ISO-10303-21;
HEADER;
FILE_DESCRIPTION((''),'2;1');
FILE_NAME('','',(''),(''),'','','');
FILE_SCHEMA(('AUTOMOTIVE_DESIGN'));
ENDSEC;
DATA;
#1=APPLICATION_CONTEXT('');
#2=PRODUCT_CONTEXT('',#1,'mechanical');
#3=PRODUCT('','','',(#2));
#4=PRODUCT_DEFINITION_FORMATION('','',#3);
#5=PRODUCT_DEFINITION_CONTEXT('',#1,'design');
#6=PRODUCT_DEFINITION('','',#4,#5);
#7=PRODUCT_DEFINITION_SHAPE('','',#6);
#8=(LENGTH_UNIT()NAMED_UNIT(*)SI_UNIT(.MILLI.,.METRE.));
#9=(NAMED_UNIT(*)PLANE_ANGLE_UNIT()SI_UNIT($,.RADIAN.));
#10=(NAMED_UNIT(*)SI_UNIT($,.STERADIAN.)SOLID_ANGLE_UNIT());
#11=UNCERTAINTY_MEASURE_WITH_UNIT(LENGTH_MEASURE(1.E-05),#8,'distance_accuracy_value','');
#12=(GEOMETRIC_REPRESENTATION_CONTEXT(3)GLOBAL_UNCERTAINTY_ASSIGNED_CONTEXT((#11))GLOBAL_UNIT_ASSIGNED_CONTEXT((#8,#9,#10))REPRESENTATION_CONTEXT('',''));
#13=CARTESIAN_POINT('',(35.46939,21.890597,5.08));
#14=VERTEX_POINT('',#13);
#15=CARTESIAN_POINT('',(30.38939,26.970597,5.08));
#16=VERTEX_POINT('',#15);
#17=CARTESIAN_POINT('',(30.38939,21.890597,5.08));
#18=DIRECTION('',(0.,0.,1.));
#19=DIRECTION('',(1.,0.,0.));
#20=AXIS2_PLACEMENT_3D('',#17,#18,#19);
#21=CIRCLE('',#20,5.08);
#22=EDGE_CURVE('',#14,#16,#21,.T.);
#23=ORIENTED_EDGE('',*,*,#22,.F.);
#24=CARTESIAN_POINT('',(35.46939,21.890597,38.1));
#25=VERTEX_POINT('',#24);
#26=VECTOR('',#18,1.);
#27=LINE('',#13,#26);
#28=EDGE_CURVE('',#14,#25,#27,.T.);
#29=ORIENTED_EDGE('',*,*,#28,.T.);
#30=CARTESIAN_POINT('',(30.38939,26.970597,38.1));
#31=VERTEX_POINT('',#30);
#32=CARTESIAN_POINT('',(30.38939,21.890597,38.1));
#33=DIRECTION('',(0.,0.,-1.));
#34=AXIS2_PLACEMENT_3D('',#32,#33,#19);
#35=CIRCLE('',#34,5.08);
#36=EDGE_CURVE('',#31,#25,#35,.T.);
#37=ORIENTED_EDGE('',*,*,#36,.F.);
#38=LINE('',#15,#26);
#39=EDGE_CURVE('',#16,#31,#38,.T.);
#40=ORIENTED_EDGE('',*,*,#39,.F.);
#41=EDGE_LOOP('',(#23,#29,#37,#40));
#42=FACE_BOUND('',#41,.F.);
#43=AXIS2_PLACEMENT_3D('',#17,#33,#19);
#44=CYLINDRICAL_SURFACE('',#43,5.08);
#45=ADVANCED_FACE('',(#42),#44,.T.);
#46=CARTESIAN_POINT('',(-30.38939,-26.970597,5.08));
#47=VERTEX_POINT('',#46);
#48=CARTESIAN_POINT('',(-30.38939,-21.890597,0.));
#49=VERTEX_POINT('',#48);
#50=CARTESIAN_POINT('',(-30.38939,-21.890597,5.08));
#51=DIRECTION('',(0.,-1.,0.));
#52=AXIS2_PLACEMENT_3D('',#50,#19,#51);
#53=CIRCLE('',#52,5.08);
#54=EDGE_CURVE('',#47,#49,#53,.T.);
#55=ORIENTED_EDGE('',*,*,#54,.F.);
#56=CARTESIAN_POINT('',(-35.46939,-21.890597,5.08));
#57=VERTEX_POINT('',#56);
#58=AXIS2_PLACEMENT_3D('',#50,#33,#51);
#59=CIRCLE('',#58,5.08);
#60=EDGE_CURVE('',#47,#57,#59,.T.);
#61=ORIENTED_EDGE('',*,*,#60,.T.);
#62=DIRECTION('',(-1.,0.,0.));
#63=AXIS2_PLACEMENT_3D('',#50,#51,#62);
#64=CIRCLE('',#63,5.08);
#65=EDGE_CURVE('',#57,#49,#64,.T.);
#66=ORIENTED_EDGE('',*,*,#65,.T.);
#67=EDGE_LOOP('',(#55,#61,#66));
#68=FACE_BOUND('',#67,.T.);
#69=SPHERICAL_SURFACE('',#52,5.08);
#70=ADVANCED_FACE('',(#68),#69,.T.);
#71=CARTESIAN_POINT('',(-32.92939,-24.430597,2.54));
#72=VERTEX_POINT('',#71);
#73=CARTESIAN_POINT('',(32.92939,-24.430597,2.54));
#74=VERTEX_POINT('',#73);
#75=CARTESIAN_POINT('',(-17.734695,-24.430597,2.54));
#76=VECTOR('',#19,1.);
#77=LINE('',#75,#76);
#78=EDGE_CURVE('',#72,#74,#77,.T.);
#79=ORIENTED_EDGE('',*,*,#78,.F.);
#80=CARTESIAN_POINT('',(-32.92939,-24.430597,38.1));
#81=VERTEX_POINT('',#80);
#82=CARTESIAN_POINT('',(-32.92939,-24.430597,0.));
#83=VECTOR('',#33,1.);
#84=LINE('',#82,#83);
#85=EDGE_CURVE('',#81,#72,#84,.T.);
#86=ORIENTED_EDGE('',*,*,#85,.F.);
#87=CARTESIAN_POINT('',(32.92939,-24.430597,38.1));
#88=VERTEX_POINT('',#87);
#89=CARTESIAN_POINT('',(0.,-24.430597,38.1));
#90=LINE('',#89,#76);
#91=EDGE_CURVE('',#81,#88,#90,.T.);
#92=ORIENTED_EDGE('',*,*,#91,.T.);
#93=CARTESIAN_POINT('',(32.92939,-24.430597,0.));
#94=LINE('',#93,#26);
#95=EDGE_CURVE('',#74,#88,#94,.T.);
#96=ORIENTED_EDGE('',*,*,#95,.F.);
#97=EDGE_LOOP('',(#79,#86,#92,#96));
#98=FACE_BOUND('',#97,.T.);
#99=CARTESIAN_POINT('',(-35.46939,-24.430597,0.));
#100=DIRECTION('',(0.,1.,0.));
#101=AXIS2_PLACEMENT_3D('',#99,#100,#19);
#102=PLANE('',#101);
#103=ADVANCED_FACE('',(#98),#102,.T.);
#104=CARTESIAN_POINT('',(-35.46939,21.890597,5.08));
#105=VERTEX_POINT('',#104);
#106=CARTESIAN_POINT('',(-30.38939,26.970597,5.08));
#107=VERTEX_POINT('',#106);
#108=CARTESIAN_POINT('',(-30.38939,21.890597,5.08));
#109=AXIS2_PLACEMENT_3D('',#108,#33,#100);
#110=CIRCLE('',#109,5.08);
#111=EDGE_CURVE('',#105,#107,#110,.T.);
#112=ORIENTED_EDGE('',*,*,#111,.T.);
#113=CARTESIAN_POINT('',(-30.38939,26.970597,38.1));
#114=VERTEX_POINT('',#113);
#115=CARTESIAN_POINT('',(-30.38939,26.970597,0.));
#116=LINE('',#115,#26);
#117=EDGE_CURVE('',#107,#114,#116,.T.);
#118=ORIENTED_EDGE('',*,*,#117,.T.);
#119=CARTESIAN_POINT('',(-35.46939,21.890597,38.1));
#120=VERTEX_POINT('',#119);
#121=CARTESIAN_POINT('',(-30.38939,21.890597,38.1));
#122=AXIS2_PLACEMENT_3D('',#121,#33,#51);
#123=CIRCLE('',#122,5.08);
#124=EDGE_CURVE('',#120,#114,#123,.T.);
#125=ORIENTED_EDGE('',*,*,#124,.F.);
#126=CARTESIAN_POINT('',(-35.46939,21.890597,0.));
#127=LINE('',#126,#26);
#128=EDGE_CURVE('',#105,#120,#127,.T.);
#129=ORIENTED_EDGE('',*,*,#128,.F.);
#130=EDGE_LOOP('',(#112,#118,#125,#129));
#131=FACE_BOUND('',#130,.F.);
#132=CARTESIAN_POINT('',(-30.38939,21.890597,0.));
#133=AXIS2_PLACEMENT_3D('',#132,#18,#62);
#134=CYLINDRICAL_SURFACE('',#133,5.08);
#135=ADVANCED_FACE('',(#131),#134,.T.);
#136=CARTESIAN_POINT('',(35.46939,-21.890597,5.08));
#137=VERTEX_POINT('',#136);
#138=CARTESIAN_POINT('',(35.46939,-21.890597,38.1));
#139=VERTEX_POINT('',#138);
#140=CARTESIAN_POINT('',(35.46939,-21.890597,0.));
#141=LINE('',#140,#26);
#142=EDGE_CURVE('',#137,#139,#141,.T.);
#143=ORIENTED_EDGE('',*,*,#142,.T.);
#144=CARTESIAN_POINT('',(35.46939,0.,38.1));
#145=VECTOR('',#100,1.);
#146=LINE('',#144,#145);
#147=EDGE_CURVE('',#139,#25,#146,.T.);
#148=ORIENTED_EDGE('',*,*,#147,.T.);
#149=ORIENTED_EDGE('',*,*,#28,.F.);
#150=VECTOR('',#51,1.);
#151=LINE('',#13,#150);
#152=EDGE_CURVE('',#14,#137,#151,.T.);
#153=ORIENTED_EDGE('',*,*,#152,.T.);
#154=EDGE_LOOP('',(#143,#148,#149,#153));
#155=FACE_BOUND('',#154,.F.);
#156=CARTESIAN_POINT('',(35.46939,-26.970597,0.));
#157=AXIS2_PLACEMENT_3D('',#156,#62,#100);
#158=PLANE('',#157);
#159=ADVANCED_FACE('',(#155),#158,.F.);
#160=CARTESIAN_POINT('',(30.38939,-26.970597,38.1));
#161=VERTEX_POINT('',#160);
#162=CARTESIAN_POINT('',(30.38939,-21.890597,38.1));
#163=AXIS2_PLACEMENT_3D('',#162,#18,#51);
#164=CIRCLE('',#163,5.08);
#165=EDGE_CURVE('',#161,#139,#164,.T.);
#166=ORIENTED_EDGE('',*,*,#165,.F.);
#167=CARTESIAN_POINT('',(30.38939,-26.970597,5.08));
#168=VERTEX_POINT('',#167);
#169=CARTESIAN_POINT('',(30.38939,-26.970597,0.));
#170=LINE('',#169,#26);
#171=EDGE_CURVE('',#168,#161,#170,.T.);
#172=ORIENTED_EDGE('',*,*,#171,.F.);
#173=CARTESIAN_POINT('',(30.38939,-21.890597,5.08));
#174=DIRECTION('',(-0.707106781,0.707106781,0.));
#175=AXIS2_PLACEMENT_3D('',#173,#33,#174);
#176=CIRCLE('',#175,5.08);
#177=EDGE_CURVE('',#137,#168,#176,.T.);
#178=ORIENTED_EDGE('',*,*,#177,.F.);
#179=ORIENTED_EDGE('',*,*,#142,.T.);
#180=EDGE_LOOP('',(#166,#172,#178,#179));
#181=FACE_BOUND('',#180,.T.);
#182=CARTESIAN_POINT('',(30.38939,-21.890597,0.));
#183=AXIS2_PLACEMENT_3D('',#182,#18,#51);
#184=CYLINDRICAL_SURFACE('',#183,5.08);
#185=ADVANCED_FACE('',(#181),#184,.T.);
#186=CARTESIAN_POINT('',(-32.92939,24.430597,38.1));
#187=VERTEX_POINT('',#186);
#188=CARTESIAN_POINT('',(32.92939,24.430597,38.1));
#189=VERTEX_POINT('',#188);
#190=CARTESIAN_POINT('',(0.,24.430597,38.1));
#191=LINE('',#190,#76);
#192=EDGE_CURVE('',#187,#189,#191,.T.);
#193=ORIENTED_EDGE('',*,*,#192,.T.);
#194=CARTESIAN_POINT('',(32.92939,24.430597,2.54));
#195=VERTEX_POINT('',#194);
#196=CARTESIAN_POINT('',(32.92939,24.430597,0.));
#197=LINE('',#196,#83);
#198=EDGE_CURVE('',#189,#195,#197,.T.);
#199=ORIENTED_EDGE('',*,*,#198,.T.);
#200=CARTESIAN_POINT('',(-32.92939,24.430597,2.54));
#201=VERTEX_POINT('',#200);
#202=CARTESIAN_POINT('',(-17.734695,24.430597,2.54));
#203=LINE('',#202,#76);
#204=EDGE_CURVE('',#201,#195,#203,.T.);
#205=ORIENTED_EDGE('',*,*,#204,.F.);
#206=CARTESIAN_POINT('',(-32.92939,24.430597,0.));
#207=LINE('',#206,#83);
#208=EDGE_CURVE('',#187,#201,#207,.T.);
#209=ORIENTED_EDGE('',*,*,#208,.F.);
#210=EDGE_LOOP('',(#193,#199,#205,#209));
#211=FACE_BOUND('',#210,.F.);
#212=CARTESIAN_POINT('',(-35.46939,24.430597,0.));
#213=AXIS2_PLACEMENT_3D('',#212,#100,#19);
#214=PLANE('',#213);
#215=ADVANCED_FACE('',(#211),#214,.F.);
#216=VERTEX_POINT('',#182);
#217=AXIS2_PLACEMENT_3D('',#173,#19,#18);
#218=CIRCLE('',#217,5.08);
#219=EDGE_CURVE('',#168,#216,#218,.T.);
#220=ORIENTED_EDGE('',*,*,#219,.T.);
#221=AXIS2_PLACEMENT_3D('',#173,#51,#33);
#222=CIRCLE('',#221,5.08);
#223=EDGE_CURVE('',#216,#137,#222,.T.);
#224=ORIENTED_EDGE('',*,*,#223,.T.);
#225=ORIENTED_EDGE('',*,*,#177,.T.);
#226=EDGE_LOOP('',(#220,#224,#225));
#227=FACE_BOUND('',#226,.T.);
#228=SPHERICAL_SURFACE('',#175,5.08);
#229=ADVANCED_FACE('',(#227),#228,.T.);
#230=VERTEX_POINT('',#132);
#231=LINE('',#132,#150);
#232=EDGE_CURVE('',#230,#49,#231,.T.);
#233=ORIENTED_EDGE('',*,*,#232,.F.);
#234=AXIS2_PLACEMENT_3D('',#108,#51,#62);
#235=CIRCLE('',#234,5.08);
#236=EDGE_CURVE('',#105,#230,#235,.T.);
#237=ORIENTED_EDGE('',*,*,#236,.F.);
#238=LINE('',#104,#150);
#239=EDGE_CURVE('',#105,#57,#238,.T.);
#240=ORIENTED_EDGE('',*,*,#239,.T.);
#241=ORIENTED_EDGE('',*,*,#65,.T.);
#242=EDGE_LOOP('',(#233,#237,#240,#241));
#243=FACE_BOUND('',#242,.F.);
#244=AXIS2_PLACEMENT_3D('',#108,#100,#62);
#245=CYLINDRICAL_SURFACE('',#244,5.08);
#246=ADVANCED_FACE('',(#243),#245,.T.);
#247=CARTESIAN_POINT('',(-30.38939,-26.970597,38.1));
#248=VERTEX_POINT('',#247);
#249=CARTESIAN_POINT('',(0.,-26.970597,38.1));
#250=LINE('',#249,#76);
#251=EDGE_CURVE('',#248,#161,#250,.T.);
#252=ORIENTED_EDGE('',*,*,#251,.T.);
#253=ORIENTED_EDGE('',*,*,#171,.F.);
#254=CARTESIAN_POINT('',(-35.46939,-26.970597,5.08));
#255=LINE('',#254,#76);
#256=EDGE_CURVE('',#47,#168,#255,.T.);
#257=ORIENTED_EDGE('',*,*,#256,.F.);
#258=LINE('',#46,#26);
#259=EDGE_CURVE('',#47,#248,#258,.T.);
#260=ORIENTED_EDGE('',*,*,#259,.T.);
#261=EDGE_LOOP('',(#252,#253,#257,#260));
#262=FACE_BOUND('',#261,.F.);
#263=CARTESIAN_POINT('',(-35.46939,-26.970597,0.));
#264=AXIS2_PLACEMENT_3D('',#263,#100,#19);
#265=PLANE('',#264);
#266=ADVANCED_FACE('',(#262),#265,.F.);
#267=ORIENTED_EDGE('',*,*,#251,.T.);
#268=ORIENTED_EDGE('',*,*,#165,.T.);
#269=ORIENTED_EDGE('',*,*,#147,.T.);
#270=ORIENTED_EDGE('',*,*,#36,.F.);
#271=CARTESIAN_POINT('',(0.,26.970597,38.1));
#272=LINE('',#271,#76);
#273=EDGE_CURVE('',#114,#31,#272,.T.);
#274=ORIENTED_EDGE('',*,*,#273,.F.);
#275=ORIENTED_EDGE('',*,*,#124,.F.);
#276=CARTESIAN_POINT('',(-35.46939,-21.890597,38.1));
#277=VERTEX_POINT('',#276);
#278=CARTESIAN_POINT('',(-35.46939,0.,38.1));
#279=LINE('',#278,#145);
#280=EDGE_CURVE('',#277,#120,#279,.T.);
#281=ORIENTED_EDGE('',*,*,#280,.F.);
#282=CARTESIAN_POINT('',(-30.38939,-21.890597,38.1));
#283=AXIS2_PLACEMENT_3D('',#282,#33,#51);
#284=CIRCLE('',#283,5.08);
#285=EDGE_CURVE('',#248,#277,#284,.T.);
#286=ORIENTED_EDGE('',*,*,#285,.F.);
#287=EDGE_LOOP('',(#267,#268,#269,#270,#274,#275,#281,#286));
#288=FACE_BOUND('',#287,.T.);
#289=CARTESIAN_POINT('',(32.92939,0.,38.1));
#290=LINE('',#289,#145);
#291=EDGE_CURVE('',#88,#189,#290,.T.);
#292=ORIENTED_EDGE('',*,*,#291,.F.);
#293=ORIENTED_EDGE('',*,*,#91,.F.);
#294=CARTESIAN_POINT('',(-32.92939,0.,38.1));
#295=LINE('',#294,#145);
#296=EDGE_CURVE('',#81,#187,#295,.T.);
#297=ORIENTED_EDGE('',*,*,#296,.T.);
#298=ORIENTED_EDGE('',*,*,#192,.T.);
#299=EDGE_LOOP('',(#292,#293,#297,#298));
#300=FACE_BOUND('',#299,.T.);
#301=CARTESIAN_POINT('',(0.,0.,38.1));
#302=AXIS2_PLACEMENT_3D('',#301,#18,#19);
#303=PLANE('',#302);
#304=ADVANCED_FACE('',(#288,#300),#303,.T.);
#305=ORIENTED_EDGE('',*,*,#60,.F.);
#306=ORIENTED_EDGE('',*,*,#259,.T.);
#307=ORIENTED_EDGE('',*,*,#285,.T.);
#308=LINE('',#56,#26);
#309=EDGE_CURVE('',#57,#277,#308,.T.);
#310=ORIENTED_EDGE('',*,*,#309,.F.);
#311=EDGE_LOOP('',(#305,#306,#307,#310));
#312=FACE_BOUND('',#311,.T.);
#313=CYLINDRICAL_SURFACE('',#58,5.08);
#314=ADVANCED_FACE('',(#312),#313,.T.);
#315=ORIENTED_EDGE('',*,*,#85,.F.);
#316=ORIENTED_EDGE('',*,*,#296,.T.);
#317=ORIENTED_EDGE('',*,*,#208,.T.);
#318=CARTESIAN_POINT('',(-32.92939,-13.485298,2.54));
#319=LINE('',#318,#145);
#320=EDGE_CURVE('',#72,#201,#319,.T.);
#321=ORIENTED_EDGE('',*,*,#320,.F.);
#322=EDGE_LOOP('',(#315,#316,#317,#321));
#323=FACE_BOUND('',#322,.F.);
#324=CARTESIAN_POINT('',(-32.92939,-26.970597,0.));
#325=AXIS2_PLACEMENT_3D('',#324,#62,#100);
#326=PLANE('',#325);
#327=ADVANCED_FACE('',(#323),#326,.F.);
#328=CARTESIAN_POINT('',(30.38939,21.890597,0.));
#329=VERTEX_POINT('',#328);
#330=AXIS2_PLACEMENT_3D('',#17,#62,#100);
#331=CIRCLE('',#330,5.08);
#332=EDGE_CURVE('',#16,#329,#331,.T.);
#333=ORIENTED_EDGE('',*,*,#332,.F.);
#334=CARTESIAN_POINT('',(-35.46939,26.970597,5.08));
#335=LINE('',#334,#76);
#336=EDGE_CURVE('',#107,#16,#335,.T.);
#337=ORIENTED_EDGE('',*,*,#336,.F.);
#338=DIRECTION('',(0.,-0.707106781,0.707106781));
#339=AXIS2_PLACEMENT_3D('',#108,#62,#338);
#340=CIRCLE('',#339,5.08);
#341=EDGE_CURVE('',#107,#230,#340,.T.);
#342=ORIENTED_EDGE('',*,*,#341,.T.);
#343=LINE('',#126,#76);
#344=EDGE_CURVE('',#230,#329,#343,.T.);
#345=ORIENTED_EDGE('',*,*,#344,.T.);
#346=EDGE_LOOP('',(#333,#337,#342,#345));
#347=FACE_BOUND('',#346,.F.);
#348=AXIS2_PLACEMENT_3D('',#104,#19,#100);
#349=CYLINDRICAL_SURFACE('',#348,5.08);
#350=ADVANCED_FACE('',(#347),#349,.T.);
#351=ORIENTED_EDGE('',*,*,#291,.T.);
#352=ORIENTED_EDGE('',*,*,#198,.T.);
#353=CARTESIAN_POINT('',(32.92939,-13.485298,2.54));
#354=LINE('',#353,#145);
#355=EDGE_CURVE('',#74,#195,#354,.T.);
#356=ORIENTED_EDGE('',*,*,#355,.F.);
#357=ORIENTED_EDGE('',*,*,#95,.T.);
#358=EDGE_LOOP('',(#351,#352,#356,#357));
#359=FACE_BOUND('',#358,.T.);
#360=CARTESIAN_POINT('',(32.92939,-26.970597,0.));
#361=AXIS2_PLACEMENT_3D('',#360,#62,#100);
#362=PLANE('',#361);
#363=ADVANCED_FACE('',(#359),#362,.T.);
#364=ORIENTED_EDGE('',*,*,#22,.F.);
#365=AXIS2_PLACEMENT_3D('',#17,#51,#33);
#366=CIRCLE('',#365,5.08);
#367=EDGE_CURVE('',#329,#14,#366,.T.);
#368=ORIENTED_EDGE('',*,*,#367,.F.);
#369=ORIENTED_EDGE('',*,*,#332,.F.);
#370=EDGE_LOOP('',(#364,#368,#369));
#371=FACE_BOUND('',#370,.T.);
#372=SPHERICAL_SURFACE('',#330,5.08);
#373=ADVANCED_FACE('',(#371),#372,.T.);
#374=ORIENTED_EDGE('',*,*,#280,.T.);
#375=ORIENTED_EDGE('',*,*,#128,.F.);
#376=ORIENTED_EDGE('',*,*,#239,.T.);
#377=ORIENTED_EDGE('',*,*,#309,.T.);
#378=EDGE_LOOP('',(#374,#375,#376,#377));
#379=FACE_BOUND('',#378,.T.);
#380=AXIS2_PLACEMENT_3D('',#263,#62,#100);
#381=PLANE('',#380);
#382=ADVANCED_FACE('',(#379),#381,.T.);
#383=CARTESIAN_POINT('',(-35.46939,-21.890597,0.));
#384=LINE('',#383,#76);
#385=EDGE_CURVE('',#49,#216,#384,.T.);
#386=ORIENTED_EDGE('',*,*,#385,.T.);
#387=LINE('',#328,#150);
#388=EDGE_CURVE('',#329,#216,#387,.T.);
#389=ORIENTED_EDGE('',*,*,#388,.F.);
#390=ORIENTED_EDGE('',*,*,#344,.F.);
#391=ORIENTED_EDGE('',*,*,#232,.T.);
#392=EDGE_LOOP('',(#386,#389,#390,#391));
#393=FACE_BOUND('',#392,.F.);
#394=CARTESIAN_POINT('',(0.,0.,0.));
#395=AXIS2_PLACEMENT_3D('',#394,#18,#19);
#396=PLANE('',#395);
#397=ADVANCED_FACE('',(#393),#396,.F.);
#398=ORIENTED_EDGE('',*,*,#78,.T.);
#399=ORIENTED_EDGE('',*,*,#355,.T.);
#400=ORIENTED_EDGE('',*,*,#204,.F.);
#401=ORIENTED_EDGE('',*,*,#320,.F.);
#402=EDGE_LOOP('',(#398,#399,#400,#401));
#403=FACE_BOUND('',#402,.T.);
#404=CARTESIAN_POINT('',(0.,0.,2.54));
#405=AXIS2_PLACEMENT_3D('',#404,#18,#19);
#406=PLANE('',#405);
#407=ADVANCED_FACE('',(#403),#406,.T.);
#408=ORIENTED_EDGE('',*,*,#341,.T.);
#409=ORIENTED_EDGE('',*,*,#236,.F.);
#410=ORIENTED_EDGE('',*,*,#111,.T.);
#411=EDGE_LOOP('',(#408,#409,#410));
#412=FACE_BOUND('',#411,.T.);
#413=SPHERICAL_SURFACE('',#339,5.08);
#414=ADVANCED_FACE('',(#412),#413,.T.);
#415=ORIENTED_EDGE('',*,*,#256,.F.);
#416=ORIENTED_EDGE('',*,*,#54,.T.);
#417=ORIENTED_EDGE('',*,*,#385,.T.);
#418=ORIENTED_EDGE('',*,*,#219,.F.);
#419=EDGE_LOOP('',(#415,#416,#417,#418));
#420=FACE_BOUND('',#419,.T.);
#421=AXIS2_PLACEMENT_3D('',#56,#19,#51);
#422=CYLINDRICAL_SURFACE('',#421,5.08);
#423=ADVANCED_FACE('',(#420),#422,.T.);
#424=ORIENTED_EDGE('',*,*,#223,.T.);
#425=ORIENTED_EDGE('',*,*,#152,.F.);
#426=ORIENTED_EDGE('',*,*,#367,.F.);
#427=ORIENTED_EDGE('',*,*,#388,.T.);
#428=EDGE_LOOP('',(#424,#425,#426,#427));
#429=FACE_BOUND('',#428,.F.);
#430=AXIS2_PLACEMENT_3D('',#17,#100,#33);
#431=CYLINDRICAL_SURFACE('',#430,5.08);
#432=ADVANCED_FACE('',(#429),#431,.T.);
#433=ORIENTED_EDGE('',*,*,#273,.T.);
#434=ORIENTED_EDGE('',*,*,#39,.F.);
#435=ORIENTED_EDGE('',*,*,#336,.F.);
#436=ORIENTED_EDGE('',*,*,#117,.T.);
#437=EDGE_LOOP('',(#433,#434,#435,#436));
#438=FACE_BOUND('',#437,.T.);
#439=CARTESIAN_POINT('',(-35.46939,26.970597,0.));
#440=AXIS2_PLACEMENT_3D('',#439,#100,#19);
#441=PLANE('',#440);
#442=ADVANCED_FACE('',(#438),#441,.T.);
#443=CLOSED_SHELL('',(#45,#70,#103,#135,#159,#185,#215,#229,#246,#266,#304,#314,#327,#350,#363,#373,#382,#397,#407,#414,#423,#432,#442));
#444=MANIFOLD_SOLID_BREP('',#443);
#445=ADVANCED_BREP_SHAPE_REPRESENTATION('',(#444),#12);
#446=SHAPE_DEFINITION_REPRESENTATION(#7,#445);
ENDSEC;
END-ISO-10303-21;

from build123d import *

# Parameters (mm, degrees)
F0_W         = 70.9387809038
F0_H         = 53.9411939681
F1_DEPTH     = 38.1
F2_T         = -2.54
F3_R         = 5.08
F4_T1_DEPTH  = 43.7811939681
F4_T3_DEPTH  = 45.72
F4_S7_W      = 5.08
F4_S7_H      = 5.08
F4_T8_DEPTH  = 5.08
F4_S13_W     = 5.08
F4_S13_H     = 5.08
F4_T14_DEPTH = 5.08
F4_T18_ANGLE = 90
F4_T20_ANGLE = 90


# Not quite as in the source:
# - a fillet or chamfer that OpenCascade refuses, or shapes differently, is made with other operations: its cross-section is extruded or revolved along the edge and cut away or added


with BuildPart() as f1:
    # F0 (on Top) → F1 (new body)
    with BuildSketch(Plane.XY):
        Rectangle(F0_W, F0_H)
    extrude(amount=F1_DEPTH)

    # F2
    f2_openings = [f1.faces().sort_by_distance(p)[0] for p in [
        (0, 0, 38.1),
    ]]
    offset(amount=F2_T, openings=f2_openings)

    # F3
    f3_edges = [f1.edges().sort_by_distance(p)[0] for p in [
        (0, 26.970597, 0),
        (0, -26.970597, 0),
        (-35.46939, 26.970597, 19.05),
        (35.46939, -26.970597, 19.05),
    ]]
    fillet(f3_edges, radius=F3_R)

    # F4: fillet of radius 5.08 on 3 edges, made by hand

    # F4_s2 → F4_t1 (cut)
    with BuildSketch(Plane.XZ.offset(-21.890596984)):
        with BuildLine():
            ThreePointArc((30.3893904519, 0), (33.9814929003, 1.4878975516), (35.4693904519, 5.08))
            Line((35.4693904519, 5.08), (35.4693904519, 0))
            Line((35.4693904519, 0), (30.3893904519, 0))
        make_face()
        with BuildLine():
            ThreePointArc((-35.4693904519, 5.08), (-33.9814929003, 1.4878975516), (-30.3893904519, 0))
            Line((-30.3893904519, 0), (-35.4693904519, 0))
            Line((-35.4693904519, 0), (-35.4693904519, 5.08))
        make_face()
    extrude(amount=F4_T1_DEPTH, mode=Mode.SUBTRACT)

    # F4_s4 → F4_t3 (cut)
    with BuildSketch(Plane.XY.offset(5.08)):
        with BuildLine():
            ThreePointArc((-30.3893904519, -26.970596984), (-33.9814929003, -25.4826994325), (-35.4693904519, -21.890596984))
            Line((-35.4693904519, -21.890596984), (-35.4693904519, -26.970596984))
            Line((-35.4693904519, -26.970596984), (-30.3893904519, -26.970596984))
        make_face()
        with BuildLine():
            ThreePointArc((35.4693904519, 21.890596984), (33.9814929003, 25.4826994325), (30.3893904519, 26.970596984))
            Line((30.3893904519, 26.970596984), (35.4693904519, 26.970596984))
            Line((35.4693904519, 26.970596984), (35.4693904519, 21.890596984))
        make_face()
    extrude(amount=F4_T3_DEPTH, mode=Mode.SUBTRACT)


with BuildPart() as f4_tool6:
    # F4_s7 → F4_t8 (new body)
    with BuildSketch(Plane.YZ.offset(-30.3893904519)):
        with Locations((24.430596984, 2.54)):
            Rectangle(F4_S7_W, F4_S7_H)
    extrude(amount=-F4_T8_DEPTH)

    # F4_s9 → F4_t10 (revolve, cut)
    with BuildSketch(Plane(origin=(-30.3893904519, 21.890596984, 5.08), x_dir=(0, -0.7071067812, 0.7071067812), z_dir=(0, -0.7071067812, -0.7071067812))):
        with BuildLine():
            ThreePointArc((0, -5.08), (5.08, 0), (0, 5.08))
            Line((0, 5.08), (0, -5.08))
        make_face()
    revolve(axis=Axis((-30.3893904519, 21.890596984, 5.08), (-1, 0, 0)), mode=Mode.SUBTRACT)


with BuildPart() as f1_1:
    add(f1.part)

    # F4_t5: cut F4_tool6
    add(f4_tool6.part, mode=Mode.SUBTRACT)


with BuildPart() as f4_tool12:
    # F4_s13 → F4_t14 (new body)
    with BuildSketch(Plane.XY.offset(5.08)):
        with Locations((32.9293904519, -24.430596984)):
            Rectangle(F4_S13_W, F4_S13_H)
    extrude(amount=-F4_T14_DEPTH)

    # F4_s15 → F4_t16 (revolve, cut)
    with BuildSketch(Plane(origin=(30.3893904519, -21.890596984, 5.08), x_dir=(-0.7071067812, 0.7071067812, 0), z_dir=(-0.7071067812, -0.7071067812, 0))):
        with BuildLine():
            ThreePointArc((0, -5.08), (5.08, 0), (0, 5.08))
            Line((0, 5.08), (0, -5.08))
        make_face()
    revolve(axis=Axis((30.3893904519, -21.890596984, 5.08), (0, 0, -1)), mode=Mode.SUBTRACT)


with BuildPart() as f1_2:
    add(f1_1.part)

    # F4_t11: cut F4_tool12
    add(f4_tool12.part, mode=Mode.SUBTRACT)

    # F4_s17 → F4_t18 (revolve, cut)
    with BuildSketch(Plane.XY.offset(5.08)):
        with BuildLine():
            ThreePointArc((-35.4693904519, -21.890596984), (-33.9814929003, -25.4826994325), (-30.3893904519, -26.970596984))
            Line((-30.3893904519, -26.970596984), (-35.4693904519, -26.970596984))
            Line((-35.4693904519, -26.970596984), (-35.4693904519, -21.890596984))
        make_face()
    revolve(axis=Axis((-35.4693904519, -21.890596984, 5.08), (1, 0, 0)), revolution_arc=F4_T18_ANGLE, mode=Mode.SUBTRACT)

    # F4_s19 → F4_t20 (revolve, cut)
    with BuildSketch(Plane.XY.offset(5.08)):
        with BuildLine():
            ThreePointArc((35.4693904519, 21.890596984), (33.9814929003, 25.4826994325), (30.3893904519, 26.970596984))
            Line((30.3893904519, 26.970596984), (35.4693904519, 26.970596984))
            Line((35.4693904519, 26.970596984), (35.4693904519, 21.890596984))
        make_face()
    revolve(axis=Axis((35.4693904519, 21.890596984, 5.08), (-1, 0, 0)), revolution_arc=F4_T20_ANGLE, mode=Mode.SUBTRACT)


solid = f1_2.part
